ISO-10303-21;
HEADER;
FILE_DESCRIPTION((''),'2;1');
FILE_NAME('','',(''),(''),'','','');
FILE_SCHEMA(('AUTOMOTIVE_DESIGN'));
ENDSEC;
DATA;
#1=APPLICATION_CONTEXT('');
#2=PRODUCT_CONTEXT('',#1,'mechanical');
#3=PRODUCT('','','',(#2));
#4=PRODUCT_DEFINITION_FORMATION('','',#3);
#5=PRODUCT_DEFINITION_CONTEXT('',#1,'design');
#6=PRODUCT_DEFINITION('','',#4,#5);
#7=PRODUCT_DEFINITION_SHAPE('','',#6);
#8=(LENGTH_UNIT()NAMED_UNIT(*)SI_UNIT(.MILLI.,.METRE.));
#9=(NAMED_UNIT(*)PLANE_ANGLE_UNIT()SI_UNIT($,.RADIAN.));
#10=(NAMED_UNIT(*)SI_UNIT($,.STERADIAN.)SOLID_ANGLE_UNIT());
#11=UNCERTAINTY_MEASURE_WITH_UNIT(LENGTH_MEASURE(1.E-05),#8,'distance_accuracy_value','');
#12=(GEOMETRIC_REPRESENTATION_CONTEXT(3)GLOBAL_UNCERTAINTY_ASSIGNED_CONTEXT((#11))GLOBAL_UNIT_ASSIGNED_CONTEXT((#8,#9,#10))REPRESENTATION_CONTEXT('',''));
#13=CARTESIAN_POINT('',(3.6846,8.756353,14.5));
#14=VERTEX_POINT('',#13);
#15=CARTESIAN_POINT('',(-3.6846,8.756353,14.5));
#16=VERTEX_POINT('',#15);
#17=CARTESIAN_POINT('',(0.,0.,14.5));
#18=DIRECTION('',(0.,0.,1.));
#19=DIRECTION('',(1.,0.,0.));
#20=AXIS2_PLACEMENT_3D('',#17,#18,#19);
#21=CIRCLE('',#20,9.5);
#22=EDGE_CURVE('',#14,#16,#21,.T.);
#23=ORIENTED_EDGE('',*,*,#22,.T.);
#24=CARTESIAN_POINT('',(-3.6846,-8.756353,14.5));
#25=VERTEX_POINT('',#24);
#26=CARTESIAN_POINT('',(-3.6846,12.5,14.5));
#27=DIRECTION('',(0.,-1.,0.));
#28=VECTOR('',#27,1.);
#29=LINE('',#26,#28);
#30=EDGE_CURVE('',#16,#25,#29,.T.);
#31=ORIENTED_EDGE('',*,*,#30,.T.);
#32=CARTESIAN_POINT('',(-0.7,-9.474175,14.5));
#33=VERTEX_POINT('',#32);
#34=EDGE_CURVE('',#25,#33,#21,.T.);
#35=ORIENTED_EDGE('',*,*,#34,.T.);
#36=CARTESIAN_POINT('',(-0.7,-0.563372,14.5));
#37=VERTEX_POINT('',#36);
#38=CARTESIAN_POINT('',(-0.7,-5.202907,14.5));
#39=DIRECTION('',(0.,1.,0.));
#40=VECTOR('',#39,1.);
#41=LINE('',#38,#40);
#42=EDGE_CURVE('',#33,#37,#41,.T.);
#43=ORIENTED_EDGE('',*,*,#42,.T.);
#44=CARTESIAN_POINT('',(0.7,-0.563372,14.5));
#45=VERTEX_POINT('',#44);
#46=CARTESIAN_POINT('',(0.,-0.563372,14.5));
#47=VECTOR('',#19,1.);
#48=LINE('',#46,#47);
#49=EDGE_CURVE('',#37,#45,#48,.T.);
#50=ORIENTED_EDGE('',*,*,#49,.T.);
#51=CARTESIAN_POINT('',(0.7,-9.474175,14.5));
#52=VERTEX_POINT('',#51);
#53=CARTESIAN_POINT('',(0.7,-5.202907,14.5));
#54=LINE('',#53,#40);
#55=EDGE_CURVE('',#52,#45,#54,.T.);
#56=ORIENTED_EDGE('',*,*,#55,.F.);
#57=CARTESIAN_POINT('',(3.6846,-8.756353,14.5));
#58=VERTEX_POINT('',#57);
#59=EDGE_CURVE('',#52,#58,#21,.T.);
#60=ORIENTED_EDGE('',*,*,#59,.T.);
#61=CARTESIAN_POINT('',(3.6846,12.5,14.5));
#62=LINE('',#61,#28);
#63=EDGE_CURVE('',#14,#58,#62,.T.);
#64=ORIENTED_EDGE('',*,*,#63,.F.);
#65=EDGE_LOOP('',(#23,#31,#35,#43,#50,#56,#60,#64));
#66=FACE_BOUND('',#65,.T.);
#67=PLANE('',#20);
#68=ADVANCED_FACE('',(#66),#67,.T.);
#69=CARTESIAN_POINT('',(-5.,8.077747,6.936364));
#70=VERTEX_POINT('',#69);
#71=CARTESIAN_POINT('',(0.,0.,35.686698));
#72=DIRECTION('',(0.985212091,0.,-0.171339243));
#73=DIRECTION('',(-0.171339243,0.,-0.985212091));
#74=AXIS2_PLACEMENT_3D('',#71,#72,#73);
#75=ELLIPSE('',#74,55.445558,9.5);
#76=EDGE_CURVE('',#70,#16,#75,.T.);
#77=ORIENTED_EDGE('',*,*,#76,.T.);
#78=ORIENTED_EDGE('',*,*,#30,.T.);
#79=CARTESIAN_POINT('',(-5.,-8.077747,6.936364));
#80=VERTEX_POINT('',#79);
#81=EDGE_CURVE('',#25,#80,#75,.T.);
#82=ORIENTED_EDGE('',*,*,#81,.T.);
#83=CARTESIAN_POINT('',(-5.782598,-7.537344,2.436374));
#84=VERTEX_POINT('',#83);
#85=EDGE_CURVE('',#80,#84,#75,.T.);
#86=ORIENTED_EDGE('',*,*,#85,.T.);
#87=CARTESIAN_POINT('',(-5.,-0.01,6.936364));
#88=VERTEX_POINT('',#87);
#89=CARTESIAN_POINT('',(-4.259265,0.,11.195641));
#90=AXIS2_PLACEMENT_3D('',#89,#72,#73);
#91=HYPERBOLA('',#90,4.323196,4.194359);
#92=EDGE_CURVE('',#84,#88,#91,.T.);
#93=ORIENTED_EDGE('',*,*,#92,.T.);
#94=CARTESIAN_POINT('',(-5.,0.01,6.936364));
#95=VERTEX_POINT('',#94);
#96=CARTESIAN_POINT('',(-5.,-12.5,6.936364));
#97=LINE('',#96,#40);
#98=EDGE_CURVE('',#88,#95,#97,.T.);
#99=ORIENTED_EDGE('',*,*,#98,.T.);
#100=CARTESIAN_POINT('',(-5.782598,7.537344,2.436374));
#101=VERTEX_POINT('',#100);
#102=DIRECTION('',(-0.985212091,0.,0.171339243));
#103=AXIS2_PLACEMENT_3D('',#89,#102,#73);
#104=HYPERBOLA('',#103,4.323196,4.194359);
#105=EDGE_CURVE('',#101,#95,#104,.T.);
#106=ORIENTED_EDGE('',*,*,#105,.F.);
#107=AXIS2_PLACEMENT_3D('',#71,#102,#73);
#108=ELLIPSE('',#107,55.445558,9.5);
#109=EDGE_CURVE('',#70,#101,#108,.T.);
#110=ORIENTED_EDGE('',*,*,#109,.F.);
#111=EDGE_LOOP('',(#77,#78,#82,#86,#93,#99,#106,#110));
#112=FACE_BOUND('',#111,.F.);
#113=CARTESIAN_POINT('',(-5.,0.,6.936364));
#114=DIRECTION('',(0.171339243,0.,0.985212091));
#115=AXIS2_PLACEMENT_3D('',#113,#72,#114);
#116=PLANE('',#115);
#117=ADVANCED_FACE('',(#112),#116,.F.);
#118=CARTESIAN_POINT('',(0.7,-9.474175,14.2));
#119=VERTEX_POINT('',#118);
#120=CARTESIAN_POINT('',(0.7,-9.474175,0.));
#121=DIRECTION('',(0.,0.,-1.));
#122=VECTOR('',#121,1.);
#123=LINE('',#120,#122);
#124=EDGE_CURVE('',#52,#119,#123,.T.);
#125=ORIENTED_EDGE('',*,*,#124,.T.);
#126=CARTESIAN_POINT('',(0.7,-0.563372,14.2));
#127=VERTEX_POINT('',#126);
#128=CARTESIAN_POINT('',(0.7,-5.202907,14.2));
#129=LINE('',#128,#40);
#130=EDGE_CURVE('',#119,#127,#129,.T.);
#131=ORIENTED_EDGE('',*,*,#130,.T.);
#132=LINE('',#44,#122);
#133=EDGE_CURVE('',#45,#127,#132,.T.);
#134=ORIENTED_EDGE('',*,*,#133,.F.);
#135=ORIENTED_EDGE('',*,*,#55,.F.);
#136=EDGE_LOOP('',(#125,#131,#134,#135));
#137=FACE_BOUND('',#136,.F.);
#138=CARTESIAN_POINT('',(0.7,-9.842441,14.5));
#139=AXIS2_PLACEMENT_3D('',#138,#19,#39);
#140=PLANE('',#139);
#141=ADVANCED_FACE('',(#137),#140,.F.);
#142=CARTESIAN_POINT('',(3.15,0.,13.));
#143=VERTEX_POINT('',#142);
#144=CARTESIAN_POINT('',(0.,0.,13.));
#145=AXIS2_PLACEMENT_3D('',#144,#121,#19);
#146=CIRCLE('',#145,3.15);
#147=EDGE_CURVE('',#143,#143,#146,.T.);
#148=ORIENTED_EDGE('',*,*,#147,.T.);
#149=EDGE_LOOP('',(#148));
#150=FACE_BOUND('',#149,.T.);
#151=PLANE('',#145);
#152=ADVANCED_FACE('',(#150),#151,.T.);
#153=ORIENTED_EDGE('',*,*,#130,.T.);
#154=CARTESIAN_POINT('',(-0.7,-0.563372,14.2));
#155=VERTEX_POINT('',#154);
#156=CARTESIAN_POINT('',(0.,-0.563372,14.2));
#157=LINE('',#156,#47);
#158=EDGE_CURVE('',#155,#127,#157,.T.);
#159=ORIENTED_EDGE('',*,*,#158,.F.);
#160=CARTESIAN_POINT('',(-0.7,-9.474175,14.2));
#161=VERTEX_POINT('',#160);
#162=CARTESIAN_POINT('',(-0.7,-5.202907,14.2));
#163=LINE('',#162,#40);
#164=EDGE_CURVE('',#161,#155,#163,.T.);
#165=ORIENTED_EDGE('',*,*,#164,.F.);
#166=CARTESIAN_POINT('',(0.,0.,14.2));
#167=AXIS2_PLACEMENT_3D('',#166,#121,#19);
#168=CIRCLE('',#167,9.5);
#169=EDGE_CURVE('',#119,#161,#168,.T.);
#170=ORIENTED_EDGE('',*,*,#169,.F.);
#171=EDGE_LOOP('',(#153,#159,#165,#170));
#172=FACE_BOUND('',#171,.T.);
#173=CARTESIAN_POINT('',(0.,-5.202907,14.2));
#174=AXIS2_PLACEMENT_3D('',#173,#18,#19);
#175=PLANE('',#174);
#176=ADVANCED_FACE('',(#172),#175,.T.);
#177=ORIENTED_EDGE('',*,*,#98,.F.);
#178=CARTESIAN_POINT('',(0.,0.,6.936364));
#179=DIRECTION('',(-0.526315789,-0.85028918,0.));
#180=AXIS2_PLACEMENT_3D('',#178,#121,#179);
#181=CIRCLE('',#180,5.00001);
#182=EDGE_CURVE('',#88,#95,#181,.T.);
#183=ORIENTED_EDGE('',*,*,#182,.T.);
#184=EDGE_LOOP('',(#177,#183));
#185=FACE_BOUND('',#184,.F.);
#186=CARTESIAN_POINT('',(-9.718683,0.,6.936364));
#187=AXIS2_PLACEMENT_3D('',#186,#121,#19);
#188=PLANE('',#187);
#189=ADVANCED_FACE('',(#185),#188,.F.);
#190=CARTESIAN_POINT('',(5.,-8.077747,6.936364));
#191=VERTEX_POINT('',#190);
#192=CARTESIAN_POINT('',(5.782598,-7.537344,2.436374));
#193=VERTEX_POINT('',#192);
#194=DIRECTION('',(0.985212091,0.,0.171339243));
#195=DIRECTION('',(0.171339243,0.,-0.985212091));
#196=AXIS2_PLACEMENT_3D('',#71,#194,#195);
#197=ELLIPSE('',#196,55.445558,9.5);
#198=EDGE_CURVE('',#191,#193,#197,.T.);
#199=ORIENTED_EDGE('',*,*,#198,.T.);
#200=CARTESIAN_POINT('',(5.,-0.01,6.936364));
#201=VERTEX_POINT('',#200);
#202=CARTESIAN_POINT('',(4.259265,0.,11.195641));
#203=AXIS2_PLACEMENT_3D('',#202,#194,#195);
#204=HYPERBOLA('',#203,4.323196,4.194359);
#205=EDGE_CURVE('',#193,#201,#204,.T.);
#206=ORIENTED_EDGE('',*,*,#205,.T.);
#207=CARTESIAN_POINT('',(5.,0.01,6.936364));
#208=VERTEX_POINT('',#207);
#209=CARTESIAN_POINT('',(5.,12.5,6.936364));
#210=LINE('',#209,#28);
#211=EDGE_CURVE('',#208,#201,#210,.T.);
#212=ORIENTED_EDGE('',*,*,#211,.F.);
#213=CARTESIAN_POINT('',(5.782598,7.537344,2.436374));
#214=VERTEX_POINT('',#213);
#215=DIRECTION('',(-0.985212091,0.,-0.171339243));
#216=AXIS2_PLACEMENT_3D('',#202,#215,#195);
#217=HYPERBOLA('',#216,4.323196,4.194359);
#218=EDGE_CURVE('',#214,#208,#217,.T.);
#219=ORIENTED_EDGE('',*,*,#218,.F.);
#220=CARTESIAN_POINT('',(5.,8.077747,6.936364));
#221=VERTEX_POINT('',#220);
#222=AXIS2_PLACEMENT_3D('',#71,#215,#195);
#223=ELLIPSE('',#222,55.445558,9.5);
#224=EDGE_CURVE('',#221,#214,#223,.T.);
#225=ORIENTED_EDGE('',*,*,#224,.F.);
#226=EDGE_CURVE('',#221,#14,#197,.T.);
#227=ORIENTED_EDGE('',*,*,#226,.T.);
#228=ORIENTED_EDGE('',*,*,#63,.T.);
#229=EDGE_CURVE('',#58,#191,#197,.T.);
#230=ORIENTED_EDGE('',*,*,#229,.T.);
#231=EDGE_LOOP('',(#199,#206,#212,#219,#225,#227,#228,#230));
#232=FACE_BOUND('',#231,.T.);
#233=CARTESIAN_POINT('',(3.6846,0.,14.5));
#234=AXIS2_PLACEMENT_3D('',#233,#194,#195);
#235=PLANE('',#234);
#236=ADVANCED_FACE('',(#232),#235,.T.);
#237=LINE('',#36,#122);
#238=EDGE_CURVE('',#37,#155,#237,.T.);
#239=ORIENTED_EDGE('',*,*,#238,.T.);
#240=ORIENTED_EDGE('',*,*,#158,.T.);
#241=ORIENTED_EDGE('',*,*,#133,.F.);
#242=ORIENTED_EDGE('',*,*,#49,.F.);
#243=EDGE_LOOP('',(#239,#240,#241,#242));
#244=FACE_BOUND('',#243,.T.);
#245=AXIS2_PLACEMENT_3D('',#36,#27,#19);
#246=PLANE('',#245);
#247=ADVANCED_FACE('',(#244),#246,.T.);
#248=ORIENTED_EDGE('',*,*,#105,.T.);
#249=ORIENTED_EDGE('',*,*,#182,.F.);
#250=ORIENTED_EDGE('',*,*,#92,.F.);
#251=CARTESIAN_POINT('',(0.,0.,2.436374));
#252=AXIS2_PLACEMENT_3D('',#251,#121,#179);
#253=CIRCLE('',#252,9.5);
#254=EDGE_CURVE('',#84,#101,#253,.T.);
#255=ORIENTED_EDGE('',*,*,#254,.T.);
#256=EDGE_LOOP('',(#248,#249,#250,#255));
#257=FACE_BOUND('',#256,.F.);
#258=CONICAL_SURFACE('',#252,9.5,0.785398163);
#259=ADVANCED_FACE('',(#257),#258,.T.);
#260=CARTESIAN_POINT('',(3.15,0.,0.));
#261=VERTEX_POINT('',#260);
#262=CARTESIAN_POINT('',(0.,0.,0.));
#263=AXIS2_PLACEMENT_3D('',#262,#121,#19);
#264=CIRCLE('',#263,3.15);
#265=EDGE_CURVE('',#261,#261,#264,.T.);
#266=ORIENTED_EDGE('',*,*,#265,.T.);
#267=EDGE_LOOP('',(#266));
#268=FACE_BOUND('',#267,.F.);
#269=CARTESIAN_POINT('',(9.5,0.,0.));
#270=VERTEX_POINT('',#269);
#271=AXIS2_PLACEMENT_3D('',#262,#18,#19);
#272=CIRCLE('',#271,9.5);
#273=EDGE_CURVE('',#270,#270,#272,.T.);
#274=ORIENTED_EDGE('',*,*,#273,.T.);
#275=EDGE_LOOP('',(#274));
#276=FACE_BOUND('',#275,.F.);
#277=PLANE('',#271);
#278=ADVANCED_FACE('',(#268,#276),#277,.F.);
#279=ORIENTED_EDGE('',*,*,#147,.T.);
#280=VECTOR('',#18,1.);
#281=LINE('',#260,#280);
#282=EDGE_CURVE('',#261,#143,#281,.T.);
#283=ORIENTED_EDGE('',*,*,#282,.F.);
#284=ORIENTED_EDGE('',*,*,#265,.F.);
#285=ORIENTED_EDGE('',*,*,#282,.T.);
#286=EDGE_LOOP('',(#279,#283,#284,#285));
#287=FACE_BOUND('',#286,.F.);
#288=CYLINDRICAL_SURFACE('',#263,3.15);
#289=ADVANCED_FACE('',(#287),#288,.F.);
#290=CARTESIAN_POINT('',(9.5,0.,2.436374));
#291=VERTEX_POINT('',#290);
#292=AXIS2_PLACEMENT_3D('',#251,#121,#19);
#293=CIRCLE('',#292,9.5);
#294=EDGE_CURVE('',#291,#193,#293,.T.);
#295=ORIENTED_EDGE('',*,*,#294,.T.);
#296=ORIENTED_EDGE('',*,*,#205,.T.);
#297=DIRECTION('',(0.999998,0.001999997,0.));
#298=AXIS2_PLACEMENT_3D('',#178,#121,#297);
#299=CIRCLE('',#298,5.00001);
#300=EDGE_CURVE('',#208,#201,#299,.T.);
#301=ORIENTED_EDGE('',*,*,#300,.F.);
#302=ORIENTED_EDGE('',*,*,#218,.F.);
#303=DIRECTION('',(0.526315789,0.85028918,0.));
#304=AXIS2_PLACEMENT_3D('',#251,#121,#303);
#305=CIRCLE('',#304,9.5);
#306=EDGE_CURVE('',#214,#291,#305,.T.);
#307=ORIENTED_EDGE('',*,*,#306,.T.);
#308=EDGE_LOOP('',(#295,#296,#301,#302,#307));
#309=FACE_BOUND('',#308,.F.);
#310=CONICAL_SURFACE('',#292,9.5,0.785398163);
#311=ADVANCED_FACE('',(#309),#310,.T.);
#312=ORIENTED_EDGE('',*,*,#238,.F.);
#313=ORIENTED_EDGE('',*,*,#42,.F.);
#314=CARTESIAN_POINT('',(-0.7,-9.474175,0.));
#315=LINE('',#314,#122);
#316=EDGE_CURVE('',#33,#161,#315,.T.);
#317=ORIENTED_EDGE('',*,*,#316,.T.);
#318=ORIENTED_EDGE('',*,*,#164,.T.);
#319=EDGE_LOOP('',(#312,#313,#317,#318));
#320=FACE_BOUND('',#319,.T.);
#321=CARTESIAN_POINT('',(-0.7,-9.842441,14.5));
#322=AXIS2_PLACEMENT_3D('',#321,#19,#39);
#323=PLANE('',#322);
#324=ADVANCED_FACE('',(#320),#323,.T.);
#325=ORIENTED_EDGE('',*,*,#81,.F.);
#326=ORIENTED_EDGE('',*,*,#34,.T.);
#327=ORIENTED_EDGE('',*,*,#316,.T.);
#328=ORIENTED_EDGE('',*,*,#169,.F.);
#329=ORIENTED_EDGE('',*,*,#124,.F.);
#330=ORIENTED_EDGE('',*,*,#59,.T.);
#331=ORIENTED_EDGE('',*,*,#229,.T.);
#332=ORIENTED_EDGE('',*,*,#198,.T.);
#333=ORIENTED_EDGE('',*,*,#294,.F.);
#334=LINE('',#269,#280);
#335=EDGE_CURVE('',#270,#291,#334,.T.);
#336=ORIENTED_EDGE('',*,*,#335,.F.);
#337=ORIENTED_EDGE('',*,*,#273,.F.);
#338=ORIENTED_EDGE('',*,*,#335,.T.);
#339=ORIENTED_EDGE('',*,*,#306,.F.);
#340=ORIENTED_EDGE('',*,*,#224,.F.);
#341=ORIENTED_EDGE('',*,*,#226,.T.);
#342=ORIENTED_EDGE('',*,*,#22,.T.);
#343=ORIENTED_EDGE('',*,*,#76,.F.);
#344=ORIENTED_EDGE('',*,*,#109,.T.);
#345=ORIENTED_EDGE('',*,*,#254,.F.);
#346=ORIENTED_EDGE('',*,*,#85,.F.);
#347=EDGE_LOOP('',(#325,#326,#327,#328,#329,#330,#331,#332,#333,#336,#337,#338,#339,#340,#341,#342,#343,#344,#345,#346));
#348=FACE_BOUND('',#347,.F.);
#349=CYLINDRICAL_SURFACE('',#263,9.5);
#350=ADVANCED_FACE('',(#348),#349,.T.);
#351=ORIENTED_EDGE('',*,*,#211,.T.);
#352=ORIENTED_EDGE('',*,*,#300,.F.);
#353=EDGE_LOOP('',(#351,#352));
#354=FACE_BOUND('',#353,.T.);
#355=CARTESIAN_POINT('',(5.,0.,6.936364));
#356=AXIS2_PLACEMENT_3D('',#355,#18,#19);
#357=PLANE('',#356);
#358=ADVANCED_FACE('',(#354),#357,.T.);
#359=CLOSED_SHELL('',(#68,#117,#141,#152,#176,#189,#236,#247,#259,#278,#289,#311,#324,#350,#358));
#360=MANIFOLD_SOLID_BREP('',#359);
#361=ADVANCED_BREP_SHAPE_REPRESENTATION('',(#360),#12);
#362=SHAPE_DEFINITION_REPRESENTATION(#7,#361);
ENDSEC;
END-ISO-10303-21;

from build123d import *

# Parameters (mm, degrees)
F0_R     = 9.5
F1_DEPTH = 14.5
F2_R     = 3.15
F3_DEPTH = 13
F5_DEPTH = 12.5
F6_SIZE  = 4.49999
F7_W     = 1.4
F7_H     = 9.2790693743
F8_DEPTH = 0.3


# Not quite as in the source:
# - a fillet or chamfer is up to 0.001 mm smaller than in the source, because OpenCascade refuses the exact size


with BuildPart() as f1:
    # F0 (on Top) → F1 (new body)
    with BuildSketch(Plane.XY):
        Circle(F0_R)
    extrude(amount=F1_DEPTH)

    # F2 (on face) → F3 (cut)
    with BuildSketch(Plane(origin=(0, 0, 0), x_dir=(1, 0, 0), z_dir=(0, 0, -1))):
        Circle(F2_R)
    extrude(amount=-F3_DEPTH, mode=Mode.SUBTRACT)

    # F4 (on Front) → F5 (cut, symmetric)
    with BuildSketch(Plane.XZ):
        Polygon((5.0005883317, 16.3299063618), (3.68460026, 14.5), (5, 6.9363636364), (9.7186830602, 6.9363636364), (12.480460446, 14.9852110131), align=None)
        Polygon((-5, 6.9363636364), (-3.68460026, 14.5), (-5.0005883317, 16.3299063618), (-12.480460446, 14.9852110131), (-9.7186830602, 6.9363636364), align=None)
    extrude(amount=F5_DEPTH, both=True, mode=Mode.SUBTRACT)

    # F6 (size 4.5 in the source; OpenCascade refuses exactly that, so slightly less here)
    f6_edges = [f1.edges().sort_by_distance(p)[0] for p in [
        (8.299096, -4.623311, 6.936364),
        (8.299096, 4.623311, 6.936364),
        (-9.5, 0, 6.936364),
    ]]
    chamfer(f6_edges, length=F6_SIZE)

    # F7 (on face) → F8 (cut)
    with BuildSketch(Plane.XY.offset(14.5)):
        with Locations((0, -5.2029067301)):
            Rectangle(F7_W, F7_H)
    extrude(amount=-F8_DEPTH, mode=Mode.SUBTRACT)


solid = f1.part
